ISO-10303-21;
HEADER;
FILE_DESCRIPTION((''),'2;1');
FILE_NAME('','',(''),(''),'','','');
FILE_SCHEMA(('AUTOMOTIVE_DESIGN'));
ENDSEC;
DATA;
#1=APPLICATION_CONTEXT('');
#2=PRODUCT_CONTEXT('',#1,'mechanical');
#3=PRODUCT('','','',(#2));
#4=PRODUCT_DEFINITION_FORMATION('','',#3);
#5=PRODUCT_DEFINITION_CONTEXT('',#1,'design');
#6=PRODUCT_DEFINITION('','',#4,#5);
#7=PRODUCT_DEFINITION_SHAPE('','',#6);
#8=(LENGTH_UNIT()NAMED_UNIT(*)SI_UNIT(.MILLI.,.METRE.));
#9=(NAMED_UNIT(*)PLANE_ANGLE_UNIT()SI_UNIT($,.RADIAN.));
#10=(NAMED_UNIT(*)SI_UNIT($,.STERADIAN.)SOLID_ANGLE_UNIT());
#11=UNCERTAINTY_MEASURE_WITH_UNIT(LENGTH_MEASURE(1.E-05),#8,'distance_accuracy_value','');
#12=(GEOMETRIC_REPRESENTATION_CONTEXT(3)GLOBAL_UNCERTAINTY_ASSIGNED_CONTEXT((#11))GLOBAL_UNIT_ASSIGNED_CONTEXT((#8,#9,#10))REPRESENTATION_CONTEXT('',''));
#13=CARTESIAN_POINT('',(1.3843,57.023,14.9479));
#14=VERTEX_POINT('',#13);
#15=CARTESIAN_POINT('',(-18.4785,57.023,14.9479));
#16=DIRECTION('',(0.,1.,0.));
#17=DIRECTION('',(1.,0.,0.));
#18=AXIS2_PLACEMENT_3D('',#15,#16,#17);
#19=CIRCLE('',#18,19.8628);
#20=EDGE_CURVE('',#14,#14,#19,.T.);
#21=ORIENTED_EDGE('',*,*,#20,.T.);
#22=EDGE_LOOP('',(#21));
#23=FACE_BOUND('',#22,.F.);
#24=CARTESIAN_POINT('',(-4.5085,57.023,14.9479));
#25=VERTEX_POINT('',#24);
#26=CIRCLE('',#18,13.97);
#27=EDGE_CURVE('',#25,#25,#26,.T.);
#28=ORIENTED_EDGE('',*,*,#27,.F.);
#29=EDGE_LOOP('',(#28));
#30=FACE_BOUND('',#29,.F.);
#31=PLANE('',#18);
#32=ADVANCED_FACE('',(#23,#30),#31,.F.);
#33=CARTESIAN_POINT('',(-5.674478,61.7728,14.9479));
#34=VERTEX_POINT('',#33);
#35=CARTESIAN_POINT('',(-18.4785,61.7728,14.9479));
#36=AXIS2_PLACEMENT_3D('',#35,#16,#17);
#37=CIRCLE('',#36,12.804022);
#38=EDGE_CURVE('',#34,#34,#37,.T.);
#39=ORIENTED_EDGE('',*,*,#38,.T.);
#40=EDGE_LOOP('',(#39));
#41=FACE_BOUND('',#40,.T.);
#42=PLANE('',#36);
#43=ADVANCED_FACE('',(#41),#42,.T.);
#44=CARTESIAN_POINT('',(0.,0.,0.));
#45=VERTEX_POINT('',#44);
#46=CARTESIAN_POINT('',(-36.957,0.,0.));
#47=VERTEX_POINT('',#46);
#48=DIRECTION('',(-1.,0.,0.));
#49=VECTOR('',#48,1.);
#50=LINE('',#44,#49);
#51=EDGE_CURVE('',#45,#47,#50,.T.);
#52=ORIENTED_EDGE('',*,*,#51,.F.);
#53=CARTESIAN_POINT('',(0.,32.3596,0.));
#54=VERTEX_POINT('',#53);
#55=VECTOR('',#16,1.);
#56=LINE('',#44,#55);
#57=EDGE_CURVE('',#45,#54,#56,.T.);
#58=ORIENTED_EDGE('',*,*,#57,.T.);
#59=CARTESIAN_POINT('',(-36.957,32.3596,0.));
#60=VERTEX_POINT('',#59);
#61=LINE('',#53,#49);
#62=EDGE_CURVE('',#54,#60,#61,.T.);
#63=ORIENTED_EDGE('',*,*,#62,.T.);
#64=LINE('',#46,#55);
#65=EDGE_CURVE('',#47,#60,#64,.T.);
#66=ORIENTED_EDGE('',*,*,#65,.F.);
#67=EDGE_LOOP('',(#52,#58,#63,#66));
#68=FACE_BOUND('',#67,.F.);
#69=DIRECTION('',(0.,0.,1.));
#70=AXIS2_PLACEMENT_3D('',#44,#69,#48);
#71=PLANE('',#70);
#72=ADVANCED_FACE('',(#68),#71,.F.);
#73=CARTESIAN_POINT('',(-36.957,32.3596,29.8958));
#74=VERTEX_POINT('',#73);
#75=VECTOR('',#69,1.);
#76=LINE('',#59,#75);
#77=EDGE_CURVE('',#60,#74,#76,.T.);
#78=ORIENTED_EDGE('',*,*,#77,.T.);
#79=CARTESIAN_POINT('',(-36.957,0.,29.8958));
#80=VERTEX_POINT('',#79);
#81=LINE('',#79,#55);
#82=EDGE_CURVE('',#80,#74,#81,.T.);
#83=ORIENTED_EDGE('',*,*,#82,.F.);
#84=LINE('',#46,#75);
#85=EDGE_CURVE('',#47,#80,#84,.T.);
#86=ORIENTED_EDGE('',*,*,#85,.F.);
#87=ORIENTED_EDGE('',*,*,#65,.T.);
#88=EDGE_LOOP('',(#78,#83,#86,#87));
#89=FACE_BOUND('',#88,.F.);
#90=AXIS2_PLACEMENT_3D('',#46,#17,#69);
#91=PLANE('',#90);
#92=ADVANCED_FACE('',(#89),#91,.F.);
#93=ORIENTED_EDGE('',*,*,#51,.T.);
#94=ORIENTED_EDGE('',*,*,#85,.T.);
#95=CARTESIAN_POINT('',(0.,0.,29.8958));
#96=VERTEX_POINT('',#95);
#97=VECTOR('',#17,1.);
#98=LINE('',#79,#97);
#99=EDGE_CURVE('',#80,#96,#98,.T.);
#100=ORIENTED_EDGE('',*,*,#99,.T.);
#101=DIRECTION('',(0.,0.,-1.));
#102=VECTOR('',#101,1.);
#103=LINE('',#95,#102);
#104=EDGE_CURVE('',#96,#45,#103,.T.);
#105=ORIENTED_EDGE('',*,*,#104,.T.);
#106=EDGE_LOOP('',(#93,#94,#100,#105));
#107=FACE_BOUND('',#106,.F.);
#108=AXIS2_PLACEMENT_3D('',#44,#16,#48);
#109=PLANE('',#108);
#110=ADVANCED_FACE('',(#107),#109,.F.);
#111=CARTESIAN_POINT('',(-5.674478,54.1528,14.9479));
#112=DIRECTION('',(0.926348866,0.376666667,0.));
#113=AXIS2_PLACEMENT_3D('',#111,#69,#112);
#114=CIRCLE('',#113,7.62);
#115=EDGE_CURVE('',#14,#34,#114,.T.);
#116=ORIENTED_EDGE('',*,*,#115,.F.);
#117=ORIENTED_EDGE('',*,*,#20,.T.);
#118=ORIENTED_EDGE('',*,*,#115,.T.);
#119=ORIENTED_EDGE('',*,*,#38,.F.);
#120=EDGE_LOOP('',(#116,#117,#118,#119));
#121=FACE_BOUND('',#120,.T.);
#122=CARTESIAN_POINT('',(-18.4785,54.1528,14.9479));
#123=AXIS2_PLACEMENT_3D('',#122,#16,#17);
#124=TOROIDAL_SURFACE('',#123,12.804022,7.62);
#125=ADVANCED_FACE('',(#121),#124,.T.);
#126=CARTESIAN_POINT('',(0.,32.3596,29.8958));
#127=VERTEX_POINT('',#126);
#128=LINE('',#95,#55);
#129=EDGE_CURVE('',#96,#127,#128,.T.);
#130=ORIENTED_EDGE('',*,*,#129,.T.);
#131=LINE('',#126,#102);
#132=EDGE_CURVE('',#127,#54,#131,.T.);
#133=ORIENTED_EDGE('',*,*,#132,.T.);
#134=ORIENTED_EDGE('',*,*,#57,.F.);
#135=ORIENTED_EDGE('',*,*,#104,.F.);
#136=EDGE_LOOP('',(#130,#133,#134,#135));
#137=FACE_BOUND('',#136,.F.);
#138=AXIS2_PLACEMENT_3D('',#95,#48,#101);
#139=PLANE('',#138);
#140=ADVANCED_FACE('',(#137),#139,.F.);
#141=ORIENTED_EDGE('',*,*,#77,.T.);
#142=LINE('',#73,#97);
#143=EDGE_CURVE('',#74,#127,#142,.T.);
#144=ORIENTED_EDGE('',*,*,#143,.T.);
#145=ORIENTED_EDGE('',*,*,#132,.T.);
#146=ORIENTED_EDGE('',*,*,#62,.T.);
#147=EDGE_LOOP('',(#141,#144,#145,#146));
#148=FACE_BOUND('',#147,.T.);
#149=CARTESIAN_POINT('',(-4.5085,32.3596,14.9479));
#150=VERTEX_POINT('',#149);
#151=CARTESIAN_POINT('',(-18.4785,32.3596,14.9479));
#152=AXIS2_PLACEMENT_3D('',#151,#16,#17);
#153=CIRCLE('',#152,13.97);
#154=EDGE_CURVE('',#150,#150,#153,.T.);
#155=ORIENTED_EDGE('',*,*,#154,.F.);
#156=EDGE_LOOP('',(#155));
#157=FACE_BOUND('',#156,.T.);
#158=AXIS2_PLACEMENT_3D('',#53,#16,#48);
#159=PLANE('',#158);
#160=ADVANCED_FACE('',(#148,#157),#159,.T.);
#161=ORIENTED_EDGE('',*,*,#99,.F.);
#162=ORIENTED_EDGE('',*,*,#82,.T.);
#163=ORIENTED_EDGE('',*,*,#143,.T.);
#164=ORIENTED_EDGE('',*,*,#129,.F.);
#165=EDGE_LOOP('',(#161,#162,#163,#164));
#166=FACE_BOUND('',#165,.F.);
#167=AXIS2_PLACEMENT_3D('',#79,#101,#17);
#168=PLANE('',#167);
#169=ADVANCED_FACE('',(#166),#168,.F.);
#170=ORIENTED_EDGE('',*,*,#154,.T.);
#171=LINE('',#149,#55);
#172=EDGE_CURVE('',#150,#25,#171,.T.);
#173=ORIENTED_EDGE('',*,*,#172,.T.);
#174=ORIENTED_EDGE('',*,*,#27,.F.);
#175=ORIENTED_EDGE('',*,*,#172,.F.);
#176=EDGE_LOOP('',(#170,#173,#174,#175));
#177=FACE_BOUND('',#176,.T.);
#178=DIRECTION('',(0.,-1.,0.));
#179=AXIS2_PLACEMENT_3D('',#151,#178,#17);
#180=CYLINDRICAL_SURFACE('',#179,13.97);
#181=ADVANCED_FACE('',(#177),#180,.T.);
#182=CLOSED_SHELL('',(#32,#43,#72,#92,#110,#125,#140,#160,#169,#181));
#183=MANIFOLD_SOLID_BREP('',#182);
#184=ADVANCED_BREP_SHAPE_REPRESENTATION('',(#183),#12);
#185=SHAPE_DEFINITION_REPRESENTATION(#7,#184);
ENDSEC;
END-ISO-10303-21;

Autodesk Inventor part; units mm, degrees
ref_plane "YZ Plane" through (0, 0, 0) normal (1, 0, 0) x (0, 1, 0)
ref_plane "XZ Plane" through (0, 0, 0) normal (0, 1, 0) x (-1, 0, 0)
ref_plane "XY Plane" through (0, 0, 0) normal (0, 0, 1) x (1, 0, 0)
sketch "Sketch1" plane through (0, 0, 0) normal (0, 1, 0) x (-1, 0, 0)
  line L0 (0, 0) -> (36.957, 0)
  line L1 (36.957, 0) -> (36.957, 29.8958)
  line L2 (36.957, 29.8958) -> (0, 29.8958)
  line L3 (0, 29.8958) -> (0, 0)
  dimension "d0" = 36.957
  dimension "d1" = 29.8958
extrude "Extrusion1" add sketch "Sketch1" along normal blind 32.3596
sketch "Sketch2" plane through (0, 32.3596, 0) normal (0, 1, 0) x (1, 0, 0)
  circle A0 centre (-18.4785, -14.9479) radius 13.97
  dimension "d4" = 27.94
extrude "Extrusion2" add sketch "Sketch2" along normal blind 24.6634
sketch "Sketch3" plane through (-18.4785, 57.023, 14.9479) normal (0, 1, 0) x (1, 0, 0)
  circle A0 centre (0, 0) radius 13.97 projected
  point P0 (18.4785, 14.9479)
sketch "Sketch4" plane through (-18.4785, 57.023, 14.9479) normal (0, 1, 0) x (1, 0, 0)
  circle A0 centre (0, 0) radius 13.97 projected
  circle A1 centre (0, 0) radius 19.8628
  point P0 (18.4785, 14.9479)
  dimension "d7" = 39.7256
extrude "Extrusion3" add sketch "Sketch4" along normal blind 4.7498 contours A0 | A1
fillet "Fillet1" radius 7.62 1 edges at (-38.3413, 61.7728, 14.9479)
properties part number "Button"
